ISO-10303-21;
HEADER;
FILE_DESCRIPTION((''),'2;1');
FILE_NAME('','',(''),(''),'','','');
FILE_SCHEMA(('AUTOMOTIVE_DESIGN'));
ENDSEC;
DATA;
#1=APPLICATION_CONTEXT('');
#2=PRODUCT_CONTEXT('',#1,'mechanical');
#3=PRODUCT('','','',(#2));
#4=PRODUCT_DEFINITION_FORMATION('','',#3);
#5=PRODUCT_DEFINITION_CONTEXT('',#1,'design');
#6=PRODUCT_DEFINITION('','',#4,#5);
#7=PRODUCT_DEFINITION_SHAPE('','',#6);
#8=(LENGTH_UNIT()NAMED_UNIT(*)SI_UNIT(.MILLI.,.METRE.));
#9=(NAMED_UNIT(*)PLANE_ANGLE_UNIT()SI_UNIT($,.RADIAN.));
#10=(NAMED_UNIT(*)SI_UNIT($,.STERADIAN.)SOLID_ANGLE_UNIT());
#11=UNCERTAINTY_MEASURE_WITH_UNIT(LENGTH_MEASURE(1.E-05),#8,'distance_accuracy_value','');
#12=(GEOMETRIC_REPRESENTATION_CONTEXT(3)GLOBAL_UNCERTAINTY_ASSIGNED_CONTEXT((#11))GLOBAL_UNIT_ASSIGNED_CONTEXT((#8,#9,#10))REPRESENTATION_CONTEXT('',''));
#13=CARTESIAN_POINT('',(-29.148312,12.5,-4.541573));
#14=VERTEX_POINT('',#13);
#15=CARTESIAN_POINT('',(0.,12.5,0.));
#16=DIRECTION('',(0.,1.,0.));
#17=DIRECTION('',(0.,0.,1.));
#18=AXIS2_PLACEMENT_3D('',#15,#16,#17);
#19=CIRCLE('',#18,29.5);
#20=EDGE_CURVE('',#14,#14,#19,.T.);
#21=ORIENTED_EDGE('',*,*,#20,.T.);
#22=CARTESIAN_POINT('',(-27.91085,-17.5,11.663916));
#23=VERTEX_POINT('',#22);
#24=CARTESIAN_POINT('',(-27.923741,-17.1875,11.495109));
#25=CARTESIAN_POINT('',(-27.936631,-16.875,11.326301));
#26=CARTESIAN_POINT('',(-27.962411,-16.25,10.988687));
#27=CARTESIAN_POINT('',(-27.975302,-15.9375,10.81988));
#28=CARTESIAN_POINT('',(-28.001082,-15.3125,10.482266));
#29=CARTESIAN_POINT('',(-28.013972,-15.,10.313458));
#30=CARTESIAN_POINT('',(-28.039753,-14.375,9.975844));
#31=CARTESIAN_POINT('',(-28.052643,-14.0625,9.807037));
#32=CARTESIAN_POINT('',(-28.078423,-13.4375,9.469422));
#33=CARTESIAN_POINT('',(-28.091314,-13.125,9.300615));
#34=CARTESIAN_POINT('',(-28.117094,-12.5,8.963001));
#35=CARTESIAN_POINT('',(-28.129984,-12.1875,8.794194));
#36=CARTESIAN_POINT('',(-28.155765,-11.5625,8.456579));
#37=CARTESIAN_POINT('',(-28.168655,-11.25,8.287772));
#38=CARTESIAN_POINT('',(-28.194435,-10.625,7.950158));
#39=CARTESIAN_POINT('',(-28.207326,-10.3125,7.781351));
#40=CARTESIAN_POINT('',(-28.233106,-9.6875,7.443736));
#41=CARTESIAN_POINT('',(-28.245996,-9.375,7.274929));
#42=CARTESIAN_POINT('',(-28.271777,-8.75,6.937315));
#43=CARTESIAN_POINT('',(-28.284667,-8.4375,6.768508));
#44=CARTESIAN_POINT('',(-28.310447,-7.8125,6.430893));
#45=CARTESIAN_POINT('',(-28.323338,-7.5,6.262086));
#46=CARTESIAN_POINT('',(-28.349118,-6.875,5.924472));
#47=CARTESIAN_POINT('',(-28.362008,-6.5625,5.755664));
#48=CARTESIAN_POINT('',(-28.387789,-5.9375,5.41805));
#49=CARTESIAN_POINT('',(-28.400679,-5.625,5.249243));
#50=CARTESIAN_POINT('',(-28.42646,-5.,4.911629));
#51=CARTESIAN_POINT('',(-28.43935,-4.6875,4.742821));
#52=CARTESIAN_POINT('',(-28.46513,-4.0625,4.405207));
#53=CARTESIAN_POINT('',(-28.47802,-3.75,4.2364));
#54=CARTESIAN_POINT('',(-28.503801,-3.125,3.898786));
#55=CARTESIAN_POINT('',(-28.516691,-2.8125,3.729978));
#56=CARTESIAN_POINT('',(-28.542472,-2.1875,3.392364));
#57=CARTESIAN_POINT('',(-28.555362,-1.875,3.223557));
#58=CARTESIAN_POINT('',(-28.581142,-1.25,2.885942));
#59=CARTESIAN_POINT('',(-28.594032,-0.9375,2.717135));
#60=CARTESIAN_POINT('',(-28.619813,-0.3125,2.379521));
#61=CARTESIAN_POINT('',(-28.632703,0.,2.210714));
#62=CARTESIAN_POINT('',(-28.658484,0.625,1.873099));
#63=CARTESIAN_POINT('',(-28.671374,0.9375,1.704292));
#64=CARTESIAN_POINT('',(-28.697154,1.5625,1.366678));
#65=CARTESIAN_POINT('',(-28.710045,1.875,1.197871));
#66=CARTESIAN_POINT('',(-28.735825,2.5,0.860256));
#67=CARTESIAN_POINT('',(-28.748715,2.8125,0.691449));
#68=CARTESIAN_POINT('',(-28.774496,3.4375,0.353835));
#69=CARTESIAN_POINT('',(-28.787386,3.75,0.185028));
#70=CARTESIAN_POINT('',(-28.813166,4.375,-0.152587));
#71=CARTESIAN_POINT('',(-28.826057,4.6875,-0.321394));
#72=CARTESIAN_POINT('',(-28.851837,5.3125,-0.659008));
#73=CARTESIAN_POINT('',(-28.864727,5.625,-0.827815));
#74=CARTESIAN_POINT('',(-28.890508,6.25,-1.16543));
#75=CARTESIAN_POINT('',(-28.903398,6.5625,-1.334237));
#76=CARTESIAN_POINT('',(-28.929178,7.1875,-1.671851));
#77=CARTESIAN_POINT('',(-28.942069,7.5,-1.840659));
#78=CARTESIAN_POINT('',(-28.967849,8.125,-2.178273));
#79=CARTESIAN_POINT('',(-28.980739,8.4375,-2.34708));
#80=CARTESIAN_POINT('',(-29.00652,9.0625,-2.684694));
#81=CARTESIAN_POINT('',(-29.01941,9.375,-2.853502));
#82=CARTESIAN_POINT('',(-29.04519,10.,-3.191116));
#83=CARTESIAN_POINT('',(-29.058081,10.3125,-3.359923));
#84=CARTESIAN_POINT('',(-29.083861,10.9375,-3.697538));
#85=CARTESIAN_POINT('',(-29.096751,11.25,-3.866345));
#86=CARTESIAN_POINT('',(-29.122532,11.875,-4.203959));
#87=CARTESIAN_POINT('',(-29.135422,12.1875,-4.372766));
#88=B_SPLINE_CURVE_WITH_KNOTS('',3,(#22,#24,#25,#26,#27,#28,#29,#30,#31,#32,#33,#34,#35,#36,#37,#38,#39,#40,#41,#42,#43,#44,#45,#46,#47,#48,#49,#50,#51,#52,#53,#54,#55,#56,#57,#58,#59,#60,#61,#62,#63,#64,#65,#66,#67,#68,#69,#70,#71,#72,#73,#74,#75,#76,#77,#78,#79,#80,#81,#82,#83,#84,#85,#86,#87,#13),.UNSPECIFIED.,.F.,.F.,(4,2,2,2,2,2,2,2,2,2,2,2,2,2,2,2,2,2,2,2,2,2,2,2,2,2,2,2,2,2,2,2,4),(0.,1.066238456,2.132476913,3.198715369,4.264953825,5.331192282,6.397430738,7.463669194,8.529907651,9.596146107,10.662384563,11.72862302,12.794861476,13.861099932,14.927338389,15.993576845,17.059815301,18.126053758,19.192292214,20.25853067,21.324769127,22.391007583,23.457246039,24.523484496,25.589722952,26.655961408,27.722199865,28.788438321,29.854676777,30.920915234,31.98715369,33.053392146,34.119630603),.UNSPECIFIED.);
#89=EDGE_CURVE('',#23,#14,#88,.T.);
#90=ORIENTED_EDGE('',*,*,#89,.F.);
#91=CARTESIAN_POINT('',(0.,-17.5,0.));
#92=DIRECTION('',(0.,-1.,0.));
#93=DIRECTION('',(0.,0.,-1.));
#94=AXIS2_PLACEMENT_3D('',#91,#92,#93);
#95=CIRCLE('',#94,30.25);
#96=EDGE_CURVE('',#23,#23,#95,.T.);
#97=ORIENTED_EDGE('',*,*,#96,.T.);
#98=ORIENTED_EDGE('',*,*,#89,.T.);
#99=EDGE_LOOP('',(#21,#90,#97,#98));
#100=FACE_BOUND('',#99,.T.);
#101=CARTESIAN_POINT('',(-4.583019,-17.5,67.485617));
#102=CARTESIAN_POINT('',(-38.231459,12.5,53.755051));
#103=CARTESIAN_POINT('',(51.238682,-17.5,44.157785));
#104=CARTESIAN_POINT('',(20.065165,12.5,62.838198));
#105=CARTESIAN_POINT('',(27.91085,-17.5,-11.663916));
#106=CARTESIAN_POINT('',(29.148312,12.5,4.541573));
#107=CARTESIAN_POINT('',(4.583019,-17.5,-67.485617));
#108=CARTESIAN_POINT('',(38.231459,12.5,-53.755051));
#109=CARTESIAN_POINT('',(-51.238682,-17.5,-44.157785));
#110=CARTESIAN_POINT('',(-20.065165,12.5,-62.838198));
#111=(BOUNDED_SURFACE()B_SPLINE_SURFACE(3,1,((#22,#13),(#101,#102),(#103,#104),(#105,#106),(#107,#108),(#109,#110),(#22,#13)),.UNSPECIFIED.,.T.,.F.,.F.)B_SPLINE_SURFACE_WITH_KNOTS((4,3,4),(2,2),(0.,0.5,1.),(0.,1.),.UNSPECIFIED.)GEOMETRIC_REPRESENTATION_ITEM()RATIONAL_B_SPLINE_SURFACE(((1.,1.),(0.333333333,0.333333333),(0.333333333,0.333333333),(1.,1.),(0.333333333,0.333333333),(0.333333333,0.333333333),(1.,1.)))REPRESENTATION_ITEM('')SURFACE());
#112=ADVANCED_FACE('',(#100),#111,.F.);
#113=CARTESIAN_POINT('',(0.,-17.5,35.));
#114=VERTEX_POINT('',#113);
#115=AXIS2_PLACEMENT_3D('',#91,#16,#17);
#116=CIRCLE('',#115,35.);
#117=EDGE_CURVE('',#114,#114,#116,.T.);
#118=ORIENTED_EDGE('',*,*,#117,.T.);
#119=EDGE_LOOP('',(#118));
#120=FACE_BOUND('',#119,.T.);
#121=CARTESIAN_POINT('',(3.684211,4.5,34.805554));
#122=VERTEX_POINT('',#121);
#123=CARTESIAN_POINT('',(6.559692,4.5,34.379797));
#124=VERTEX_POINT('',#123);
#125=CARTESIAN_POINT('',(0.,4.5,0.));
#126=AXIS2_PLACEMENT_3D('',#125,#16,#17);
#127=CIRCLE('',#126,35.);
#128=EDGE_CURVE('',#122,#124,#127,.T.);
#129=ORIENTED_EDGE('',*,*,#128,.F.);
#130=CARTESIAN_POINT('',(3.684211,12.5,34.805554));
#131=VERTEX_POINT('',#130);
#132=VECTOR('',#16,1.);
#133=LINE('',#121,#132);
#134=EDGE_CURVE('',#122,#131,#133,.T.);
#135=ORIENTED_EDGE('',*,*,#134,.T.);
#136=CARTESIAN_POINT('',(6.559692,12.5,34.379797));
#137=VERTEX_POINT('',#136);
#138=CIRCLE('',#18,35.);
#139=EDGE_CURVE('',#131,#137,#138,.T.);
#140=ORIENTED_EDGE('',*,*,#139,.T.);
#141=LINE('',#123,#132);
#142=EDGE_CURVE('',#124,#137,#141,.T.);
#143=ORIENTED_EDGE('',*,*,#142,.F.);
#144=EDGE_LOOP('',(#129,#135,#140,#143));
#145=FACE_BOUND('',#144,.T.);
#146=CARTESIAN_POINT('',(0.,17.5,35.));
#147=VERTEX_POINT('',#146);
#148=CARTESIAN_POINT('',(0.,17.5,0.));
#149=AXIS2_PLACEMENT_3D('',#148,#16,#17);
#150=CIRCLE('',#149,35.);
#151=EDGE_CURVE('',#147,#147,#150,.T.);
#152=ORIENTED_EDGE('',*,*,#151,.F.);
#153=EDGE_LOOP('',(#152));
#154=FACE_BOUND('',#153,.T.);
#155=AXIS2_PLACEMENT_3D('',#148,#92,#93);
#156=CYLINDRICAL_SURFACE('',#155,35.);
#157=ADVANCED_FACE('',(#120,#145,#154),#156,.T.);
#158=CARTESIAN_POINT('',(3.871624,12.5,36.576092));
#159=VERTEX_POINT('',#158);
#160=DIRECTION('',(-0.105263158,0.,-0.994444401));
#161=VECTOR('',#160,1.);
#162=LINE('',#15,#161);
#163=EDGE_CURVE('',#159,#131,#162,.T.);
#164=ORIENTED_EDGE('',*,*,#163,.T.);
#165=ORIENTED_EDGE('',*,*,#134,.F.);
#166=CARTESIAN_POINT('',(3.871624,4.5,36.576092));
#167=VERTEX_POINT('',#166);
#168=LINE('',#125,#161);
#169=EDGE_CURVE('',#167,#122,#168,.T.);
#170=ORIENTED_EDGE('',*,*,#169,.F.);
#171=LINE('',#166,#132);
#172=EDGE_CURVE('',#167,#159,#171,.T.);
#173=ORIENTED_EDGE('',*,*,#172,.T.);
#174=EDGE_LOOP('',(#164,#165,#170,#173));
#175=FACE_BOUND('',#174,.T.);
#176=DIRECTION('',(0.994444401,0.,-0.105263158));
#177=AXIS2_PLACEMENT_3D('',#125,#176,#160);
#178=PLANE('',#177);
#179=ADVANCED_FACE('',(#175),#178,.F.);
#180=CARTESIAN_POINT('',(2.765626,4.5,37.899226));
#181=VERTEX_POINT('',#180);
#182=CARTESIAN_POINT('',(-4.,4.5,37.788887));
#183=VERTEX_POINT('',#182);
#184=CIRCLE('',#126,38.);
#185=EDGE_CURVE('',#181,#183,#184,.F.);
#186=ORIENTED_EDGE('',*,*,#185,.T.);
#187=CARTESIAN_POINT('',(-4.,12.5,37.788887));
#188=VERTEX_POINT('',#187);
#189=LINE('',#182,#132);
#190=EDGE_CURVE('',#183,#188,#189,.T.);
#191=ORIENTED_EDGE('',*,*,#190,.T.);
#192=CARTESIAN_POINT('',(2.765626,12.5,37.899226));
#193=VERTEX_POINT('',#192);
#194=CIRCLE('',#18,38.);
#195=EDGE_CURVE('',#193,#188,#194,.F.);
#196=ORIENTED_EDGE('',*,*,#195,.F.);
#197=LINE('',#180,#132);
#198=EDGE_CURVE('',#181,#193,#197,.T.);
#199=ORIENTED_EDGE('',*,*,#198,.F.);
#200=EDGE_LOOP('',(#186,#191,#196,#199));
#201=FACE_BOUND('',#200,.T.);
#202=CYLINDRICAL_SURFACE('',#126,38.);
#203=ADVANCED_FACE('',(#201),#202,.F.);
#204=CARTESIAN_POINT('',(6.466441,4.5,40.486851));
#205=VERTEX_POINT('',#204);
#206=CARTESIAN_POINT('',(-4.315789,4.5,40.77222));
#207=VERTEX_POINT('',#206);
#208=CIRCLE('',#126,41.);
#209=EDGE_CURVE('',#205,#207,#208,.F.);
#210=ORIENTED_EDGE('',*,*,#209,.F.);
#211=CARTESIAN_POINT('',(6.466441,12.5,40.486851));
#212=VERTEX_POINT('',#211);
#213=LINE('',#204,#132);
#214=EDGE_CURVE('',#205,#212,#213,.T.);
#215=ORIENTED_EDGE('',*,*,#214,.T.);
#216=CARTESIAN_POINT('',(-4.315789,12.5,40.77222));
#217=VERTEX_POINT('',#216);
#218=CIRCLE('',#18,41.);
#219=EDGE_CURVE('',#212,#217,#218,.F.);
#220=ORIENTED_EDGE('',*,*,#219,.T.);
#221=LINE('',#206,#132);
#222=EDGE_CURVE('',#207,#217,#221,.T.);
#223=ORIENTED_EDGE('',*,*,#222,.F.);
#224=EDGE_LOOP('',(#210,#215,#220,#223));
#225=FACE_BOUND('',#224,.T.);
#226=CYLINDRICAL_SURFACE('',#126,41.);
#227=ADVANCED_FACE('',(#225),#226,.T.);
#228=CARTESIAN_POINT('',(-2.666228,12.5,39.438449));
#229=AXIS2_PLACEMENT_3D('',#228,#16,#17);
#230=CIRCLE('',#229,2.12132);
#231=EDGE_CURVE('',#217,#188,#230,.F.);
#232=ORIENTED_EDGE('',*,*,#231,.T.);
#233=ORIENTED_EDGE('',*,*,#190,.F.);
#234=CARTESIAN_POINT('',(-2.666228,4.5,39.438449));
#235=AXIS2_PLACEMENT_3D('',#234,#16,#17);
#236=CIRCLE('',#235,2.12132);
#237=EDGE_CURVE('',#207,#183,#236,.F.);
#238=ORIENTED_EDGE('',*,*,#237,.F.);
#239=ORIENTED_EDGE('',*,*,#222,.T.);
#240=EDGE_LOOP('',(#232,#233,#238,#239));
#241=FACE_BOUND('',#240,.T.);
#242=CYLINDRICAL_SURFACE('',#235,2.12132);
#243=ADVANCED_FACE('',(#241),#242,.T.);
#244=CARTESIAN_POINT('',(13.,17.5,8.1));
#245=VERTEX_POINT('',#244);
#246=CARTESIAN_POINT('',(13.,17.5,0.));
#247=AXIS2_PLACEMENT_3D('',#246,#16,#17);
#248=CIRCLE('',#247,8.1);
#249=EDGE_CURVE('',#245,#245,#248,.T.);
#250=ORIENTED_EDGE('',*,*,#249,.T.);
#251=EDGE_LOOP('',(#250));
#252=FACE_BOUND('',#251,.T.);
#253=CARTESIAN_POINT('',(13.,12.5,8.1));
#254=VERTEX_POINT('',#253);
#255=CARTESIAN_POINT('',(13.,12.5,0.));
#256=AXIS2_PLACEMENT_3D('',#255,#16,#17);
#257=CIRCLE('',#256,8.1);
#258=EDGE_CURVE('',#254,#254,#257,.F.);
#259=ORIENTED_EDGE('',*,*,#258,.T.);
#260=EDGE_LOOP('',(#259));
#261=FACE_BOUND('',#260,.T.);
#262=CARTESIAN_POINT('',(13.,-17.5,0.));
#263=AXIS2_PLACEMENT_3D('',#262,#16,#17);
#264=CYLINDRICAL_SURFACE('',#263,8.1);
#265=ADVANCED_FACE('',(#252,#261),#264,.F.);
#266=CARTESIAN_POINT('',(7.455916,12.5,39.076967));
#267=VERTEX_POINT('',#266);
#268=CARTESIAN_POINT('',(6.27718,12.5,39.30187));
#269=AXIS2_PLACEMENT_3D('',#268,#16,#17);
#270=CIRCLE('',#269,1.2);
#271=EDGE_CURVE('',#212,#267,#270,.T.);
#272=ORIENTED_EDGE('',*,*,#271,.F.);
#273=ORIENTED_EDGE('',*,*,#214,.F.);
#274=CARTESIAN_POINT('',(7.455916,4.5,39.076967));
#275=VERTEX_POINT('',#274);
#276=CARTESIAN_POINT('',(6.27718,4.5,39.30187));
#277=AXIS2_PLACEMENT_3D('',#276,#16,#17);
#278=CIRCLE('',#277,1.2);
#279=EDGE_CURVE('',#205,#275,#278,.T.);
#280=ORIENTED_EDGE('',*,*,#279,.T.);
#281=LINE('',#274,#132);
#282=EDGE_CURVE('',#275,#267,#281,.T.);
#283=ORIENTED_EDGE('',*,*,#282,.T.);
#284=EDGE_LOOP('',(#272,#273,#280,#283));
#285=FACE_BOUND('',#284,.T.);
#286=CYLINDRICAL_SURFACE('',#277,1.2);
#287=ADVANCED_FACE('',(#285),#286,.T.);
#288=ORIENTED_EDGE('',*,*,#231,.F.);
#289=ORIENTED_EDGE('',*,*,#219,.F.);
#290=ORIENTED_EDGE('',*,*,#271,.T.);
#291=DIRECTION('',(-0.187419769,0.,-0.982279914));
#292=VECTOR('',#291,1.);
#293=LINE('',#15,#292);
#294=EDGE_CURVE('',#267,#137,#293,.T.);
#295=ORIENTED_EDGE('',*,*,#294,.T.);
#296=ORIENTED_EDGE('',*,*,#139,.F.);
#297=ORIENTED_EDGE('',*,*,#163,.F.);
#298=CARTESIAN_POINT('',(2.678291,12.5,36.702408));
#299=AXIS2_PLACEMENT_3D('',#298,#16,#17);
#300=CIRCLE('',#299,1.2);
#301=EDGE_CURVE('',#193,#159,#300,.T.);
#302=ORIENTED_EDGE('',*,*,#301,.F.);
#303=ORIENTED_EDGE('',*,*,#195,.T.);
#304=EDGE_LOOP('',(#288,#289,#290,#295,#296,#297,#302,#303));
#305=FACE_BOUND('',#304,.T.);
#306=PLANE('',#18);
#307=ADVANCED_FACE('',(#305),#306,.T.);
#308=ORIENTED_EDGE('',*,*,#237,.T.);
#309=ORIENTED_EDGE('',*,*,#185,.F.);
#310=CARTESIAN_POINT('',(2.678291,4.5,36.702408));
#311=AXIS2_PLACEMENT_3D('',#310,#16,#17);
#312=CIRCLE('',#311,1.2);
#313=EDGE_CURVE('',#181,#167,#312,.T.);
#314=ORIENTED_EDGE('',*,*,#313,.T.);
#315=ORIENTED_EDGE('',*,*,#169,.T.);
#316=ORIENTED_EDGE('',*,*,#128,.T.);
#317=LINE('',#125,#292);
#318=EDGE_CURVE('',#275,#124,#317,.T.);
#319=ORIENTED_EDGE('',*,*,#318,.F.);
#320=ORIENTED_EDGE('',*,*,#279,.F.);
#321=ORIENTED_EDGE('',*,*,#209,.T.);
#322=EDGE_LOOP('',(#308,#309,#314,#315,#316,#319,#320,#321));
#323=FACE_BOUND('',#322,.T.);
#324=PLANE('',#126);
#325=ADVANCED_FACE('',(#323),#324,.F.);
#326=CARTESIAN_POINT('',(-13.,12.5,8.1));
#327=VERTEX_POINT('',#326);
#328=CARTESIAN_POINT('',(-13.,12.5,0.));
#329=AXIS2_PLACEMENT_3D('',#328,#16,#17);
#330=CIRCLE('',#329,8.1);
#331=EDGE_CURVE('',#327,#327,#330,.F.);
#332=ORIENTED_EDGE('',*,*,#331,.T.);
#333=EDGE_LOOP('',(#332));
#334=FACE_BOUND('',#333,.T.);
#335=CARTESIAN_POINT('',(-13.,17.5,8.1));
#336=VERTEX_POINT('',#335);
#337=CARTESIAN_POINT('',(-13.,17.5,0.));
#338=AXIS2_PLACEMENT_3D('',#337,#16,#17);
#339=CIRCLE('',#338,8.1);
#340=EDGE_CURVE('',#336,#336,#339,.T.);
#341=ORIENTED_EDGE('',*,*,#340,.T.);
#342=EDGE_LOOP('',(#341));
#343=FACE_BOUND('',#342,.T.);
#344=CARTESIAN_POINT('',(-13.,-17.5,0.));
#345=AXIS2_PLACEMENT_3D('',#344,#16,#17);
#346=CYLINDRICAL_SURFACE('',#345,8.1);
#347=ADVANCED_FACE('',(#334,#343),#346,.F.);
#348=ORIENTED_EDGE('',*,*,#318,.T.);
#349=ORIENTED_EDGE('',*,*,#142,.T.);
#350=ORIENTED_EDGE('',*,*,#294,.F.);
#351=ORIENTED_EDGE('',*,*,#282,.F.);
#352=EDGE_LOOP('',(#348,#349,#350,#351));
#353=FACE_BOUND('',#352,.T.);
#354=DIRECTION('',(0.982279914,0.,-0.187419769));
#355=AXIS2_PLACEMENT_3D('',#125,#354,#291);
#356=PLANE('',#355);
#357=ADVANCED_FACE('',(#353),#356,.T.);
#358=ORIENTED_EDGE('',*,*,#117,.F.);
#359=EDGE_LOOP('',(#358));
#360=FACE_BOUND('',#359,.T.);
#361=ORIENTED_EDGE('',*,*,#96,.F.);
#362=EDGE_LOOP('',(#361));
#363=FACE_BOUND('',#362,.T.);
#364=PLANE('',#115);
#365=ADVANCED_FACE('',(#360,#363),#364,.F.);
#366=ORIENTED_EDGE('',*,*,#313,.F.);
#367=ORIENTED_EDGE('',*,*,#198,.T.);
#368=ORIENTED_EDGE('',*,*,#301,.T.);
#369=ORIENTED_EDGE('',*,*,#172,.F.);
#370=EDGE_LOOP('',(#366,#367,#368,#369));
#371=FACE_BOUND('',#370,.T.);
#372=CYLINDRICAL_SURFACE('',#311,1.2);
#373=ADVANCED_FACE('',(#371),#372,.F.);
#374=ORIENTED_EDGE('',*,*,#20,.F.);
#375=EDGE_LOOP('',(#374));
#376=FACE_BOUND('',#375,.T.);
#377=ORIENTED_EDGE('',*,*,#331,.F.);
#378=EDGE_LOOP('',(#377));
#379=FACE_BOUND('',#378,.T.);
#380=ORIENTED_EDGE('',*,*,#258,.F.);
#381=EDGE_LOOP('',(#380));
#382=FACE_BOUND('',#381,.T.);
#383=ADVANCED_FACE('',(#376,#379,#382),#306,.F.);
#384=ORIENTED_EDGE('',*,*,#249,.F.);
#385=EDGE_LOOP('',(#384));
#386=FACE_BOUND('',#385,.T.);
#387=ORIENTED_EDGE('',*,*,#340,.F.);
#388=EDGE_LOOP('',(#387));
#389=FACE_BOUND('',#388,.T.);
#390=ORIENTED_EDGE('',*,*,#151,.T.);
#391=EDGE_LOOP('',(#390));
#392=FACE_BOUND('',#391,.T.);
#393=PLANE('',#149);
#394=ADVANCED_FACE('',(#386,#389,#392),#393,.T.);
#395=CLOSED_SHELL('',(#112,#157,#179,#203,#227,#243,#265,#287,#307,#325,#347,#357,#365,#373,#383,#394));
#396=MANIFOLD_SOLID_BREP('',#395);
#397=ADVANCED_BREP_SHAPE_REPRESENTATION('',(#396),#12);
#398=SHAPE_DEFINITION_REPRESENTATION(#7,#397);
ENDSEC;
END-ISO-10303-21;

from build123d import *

# Parameters (mm, degrees)
ESBO_O1_R                = 35
RESSALTO_EXTRUS_O1_DEPTH = 17.5
ESBO_O2_R                = 8.1
CORTE_EXTRUS_O1_DEPTH    = 61.621778265
RESSALTO_EXTRUS_O2_DEPTH = 8


with BuildPart() as part:
    # Esboço1 → Ressalto-extrusão1 (new, symmetric)
    with BuildSketch(Plane(origin=(0, 0, 0), x_dir=(1, 0, 0), z_dir=(0, 1, 0))):
        with Locations(Location((0, 0, 0), (0, 0, 270))):
            Circle(ESBO_O1_R)
    extrude(amount=RESSALTO_EXTRUS_O1_DEPTH, both=True)

    # Esboço2 → Corte-extrusão1 (cut, through all)
    with BuildSketch(Plane(origin=(0, 17.5, 0), x_dir=(1, 0, 0), z_dir=(0, 1, 0))):
        with Locations(Location((-13, 0, 0), (0, 0, 270))):
            Circle(ESBO_O2_R)
        with Locations(Location((13, 0, 0), (0, 0, 270))):
            Circle(ESBO_O2_R)
    extrude(amount=-CORTE_EXTRUS_O1_DEPTH, mode=Mode.SUBTRACT)

    # Loft de corte1: read off the stored shape, not the designer's step
    # Loft de corte1: loft between two sections, ruled curve by curve
    loft_de_corte1_from = [
        Edge.make_bspline([(-27.910850381, -17.5, 11.663915766), (-4.583018848, -17.5, 67.485616529), (51.238681914, -17.5, 44.157784996), (27.910850381, -17.5, -11.663915766), (4.583018848, -17.5, -67.485616529), (-51.238681914, -17.5, -44.157784996), (-27.910850381, -17.5, 11.663915766)], [0, 0, 0, 0, 0.5, 0.5, 0.5, 1, 1, 1, 1], 3, [1, 0.333333333, 0.333333333, 1, 0.333333333, 0.333333333, 1]),
    ]
    loft_de_corte1_to = [
        Edge.make_bspline([(-29.148312313, 12.5, -4.54157344), (-38.231459193, 12.5, 53.755051185), (20.065165432, 12.5, 62.838198066), (29.148312313, 12.5, 4.54157344), (38.231459193, 12.5, -53.755051185), (-20.065165432, 12.5, -62.838198066), (-29.148312313, 12.5, -4.54157344)], [0, 0, 0, 0, 0.5, 0.5, 0.5, 1, 1, 1, 1], 3, [1, 0.333333333, 0.333333333, 1, 0.333333333, 0.333333333, 1]),
    ]
    loft_de_corte1 = Solid(Shell([*[Face.make_surface_from_curves(loft_de_corte1_from[k], loft_de_corte1_to[k]) for k in range(1)], Face(Wire(loft_de_corte1_from)), Face(Wire(loft_de_corte1_to))]))
    add(loft_de_corte1, mode=Mode.SUBTRACT)

    # Esboço6 → Ressalto-extrusão2 (add)
    with BuildSketch(Plane(origin=(0, 12.5, 0), x_dir=(1, 0, 0), z_dir=(0, 1, 0))):
        with BuildLine():
            ThreePointArc((6.466441324, -40.486851404), (7.259420992, -39.991219283), (7.455915524, -39.076966664))
            Line((7.455915524, -39.076966664), (6.559691913, -34.379797004))
            ThreePointArc((6.559691913, -34.379797004), (5.126373139, -34.622540323), (3.684210526, -34.805554051))
            Line((3.684210526, -34.805554051), (3.871624166, -36.576092278))
            ThreePointArc((3.871624166, -36.576092278), (3.598996432, -37.472019199), (2.765626457, -37.899225722))
            ThreePointArc((2.765626457, -37.899225722), (-0.619647606, -37.994947517), (-4, -37.788887255))
            ThreePointArc((-4, -37.788887255), (-4.775763274, -39.215151716), (-4.315789474, -40.77222046))
            ThreePointArc((-4.315789474, -40.77222046), (1.084750995, -40.985647674), (6.466441324, -40.486851404))
        make_face()
    extrude(amount=-RESSALTO_EXTRUS_O2_DEPTH)


solid = part.part
